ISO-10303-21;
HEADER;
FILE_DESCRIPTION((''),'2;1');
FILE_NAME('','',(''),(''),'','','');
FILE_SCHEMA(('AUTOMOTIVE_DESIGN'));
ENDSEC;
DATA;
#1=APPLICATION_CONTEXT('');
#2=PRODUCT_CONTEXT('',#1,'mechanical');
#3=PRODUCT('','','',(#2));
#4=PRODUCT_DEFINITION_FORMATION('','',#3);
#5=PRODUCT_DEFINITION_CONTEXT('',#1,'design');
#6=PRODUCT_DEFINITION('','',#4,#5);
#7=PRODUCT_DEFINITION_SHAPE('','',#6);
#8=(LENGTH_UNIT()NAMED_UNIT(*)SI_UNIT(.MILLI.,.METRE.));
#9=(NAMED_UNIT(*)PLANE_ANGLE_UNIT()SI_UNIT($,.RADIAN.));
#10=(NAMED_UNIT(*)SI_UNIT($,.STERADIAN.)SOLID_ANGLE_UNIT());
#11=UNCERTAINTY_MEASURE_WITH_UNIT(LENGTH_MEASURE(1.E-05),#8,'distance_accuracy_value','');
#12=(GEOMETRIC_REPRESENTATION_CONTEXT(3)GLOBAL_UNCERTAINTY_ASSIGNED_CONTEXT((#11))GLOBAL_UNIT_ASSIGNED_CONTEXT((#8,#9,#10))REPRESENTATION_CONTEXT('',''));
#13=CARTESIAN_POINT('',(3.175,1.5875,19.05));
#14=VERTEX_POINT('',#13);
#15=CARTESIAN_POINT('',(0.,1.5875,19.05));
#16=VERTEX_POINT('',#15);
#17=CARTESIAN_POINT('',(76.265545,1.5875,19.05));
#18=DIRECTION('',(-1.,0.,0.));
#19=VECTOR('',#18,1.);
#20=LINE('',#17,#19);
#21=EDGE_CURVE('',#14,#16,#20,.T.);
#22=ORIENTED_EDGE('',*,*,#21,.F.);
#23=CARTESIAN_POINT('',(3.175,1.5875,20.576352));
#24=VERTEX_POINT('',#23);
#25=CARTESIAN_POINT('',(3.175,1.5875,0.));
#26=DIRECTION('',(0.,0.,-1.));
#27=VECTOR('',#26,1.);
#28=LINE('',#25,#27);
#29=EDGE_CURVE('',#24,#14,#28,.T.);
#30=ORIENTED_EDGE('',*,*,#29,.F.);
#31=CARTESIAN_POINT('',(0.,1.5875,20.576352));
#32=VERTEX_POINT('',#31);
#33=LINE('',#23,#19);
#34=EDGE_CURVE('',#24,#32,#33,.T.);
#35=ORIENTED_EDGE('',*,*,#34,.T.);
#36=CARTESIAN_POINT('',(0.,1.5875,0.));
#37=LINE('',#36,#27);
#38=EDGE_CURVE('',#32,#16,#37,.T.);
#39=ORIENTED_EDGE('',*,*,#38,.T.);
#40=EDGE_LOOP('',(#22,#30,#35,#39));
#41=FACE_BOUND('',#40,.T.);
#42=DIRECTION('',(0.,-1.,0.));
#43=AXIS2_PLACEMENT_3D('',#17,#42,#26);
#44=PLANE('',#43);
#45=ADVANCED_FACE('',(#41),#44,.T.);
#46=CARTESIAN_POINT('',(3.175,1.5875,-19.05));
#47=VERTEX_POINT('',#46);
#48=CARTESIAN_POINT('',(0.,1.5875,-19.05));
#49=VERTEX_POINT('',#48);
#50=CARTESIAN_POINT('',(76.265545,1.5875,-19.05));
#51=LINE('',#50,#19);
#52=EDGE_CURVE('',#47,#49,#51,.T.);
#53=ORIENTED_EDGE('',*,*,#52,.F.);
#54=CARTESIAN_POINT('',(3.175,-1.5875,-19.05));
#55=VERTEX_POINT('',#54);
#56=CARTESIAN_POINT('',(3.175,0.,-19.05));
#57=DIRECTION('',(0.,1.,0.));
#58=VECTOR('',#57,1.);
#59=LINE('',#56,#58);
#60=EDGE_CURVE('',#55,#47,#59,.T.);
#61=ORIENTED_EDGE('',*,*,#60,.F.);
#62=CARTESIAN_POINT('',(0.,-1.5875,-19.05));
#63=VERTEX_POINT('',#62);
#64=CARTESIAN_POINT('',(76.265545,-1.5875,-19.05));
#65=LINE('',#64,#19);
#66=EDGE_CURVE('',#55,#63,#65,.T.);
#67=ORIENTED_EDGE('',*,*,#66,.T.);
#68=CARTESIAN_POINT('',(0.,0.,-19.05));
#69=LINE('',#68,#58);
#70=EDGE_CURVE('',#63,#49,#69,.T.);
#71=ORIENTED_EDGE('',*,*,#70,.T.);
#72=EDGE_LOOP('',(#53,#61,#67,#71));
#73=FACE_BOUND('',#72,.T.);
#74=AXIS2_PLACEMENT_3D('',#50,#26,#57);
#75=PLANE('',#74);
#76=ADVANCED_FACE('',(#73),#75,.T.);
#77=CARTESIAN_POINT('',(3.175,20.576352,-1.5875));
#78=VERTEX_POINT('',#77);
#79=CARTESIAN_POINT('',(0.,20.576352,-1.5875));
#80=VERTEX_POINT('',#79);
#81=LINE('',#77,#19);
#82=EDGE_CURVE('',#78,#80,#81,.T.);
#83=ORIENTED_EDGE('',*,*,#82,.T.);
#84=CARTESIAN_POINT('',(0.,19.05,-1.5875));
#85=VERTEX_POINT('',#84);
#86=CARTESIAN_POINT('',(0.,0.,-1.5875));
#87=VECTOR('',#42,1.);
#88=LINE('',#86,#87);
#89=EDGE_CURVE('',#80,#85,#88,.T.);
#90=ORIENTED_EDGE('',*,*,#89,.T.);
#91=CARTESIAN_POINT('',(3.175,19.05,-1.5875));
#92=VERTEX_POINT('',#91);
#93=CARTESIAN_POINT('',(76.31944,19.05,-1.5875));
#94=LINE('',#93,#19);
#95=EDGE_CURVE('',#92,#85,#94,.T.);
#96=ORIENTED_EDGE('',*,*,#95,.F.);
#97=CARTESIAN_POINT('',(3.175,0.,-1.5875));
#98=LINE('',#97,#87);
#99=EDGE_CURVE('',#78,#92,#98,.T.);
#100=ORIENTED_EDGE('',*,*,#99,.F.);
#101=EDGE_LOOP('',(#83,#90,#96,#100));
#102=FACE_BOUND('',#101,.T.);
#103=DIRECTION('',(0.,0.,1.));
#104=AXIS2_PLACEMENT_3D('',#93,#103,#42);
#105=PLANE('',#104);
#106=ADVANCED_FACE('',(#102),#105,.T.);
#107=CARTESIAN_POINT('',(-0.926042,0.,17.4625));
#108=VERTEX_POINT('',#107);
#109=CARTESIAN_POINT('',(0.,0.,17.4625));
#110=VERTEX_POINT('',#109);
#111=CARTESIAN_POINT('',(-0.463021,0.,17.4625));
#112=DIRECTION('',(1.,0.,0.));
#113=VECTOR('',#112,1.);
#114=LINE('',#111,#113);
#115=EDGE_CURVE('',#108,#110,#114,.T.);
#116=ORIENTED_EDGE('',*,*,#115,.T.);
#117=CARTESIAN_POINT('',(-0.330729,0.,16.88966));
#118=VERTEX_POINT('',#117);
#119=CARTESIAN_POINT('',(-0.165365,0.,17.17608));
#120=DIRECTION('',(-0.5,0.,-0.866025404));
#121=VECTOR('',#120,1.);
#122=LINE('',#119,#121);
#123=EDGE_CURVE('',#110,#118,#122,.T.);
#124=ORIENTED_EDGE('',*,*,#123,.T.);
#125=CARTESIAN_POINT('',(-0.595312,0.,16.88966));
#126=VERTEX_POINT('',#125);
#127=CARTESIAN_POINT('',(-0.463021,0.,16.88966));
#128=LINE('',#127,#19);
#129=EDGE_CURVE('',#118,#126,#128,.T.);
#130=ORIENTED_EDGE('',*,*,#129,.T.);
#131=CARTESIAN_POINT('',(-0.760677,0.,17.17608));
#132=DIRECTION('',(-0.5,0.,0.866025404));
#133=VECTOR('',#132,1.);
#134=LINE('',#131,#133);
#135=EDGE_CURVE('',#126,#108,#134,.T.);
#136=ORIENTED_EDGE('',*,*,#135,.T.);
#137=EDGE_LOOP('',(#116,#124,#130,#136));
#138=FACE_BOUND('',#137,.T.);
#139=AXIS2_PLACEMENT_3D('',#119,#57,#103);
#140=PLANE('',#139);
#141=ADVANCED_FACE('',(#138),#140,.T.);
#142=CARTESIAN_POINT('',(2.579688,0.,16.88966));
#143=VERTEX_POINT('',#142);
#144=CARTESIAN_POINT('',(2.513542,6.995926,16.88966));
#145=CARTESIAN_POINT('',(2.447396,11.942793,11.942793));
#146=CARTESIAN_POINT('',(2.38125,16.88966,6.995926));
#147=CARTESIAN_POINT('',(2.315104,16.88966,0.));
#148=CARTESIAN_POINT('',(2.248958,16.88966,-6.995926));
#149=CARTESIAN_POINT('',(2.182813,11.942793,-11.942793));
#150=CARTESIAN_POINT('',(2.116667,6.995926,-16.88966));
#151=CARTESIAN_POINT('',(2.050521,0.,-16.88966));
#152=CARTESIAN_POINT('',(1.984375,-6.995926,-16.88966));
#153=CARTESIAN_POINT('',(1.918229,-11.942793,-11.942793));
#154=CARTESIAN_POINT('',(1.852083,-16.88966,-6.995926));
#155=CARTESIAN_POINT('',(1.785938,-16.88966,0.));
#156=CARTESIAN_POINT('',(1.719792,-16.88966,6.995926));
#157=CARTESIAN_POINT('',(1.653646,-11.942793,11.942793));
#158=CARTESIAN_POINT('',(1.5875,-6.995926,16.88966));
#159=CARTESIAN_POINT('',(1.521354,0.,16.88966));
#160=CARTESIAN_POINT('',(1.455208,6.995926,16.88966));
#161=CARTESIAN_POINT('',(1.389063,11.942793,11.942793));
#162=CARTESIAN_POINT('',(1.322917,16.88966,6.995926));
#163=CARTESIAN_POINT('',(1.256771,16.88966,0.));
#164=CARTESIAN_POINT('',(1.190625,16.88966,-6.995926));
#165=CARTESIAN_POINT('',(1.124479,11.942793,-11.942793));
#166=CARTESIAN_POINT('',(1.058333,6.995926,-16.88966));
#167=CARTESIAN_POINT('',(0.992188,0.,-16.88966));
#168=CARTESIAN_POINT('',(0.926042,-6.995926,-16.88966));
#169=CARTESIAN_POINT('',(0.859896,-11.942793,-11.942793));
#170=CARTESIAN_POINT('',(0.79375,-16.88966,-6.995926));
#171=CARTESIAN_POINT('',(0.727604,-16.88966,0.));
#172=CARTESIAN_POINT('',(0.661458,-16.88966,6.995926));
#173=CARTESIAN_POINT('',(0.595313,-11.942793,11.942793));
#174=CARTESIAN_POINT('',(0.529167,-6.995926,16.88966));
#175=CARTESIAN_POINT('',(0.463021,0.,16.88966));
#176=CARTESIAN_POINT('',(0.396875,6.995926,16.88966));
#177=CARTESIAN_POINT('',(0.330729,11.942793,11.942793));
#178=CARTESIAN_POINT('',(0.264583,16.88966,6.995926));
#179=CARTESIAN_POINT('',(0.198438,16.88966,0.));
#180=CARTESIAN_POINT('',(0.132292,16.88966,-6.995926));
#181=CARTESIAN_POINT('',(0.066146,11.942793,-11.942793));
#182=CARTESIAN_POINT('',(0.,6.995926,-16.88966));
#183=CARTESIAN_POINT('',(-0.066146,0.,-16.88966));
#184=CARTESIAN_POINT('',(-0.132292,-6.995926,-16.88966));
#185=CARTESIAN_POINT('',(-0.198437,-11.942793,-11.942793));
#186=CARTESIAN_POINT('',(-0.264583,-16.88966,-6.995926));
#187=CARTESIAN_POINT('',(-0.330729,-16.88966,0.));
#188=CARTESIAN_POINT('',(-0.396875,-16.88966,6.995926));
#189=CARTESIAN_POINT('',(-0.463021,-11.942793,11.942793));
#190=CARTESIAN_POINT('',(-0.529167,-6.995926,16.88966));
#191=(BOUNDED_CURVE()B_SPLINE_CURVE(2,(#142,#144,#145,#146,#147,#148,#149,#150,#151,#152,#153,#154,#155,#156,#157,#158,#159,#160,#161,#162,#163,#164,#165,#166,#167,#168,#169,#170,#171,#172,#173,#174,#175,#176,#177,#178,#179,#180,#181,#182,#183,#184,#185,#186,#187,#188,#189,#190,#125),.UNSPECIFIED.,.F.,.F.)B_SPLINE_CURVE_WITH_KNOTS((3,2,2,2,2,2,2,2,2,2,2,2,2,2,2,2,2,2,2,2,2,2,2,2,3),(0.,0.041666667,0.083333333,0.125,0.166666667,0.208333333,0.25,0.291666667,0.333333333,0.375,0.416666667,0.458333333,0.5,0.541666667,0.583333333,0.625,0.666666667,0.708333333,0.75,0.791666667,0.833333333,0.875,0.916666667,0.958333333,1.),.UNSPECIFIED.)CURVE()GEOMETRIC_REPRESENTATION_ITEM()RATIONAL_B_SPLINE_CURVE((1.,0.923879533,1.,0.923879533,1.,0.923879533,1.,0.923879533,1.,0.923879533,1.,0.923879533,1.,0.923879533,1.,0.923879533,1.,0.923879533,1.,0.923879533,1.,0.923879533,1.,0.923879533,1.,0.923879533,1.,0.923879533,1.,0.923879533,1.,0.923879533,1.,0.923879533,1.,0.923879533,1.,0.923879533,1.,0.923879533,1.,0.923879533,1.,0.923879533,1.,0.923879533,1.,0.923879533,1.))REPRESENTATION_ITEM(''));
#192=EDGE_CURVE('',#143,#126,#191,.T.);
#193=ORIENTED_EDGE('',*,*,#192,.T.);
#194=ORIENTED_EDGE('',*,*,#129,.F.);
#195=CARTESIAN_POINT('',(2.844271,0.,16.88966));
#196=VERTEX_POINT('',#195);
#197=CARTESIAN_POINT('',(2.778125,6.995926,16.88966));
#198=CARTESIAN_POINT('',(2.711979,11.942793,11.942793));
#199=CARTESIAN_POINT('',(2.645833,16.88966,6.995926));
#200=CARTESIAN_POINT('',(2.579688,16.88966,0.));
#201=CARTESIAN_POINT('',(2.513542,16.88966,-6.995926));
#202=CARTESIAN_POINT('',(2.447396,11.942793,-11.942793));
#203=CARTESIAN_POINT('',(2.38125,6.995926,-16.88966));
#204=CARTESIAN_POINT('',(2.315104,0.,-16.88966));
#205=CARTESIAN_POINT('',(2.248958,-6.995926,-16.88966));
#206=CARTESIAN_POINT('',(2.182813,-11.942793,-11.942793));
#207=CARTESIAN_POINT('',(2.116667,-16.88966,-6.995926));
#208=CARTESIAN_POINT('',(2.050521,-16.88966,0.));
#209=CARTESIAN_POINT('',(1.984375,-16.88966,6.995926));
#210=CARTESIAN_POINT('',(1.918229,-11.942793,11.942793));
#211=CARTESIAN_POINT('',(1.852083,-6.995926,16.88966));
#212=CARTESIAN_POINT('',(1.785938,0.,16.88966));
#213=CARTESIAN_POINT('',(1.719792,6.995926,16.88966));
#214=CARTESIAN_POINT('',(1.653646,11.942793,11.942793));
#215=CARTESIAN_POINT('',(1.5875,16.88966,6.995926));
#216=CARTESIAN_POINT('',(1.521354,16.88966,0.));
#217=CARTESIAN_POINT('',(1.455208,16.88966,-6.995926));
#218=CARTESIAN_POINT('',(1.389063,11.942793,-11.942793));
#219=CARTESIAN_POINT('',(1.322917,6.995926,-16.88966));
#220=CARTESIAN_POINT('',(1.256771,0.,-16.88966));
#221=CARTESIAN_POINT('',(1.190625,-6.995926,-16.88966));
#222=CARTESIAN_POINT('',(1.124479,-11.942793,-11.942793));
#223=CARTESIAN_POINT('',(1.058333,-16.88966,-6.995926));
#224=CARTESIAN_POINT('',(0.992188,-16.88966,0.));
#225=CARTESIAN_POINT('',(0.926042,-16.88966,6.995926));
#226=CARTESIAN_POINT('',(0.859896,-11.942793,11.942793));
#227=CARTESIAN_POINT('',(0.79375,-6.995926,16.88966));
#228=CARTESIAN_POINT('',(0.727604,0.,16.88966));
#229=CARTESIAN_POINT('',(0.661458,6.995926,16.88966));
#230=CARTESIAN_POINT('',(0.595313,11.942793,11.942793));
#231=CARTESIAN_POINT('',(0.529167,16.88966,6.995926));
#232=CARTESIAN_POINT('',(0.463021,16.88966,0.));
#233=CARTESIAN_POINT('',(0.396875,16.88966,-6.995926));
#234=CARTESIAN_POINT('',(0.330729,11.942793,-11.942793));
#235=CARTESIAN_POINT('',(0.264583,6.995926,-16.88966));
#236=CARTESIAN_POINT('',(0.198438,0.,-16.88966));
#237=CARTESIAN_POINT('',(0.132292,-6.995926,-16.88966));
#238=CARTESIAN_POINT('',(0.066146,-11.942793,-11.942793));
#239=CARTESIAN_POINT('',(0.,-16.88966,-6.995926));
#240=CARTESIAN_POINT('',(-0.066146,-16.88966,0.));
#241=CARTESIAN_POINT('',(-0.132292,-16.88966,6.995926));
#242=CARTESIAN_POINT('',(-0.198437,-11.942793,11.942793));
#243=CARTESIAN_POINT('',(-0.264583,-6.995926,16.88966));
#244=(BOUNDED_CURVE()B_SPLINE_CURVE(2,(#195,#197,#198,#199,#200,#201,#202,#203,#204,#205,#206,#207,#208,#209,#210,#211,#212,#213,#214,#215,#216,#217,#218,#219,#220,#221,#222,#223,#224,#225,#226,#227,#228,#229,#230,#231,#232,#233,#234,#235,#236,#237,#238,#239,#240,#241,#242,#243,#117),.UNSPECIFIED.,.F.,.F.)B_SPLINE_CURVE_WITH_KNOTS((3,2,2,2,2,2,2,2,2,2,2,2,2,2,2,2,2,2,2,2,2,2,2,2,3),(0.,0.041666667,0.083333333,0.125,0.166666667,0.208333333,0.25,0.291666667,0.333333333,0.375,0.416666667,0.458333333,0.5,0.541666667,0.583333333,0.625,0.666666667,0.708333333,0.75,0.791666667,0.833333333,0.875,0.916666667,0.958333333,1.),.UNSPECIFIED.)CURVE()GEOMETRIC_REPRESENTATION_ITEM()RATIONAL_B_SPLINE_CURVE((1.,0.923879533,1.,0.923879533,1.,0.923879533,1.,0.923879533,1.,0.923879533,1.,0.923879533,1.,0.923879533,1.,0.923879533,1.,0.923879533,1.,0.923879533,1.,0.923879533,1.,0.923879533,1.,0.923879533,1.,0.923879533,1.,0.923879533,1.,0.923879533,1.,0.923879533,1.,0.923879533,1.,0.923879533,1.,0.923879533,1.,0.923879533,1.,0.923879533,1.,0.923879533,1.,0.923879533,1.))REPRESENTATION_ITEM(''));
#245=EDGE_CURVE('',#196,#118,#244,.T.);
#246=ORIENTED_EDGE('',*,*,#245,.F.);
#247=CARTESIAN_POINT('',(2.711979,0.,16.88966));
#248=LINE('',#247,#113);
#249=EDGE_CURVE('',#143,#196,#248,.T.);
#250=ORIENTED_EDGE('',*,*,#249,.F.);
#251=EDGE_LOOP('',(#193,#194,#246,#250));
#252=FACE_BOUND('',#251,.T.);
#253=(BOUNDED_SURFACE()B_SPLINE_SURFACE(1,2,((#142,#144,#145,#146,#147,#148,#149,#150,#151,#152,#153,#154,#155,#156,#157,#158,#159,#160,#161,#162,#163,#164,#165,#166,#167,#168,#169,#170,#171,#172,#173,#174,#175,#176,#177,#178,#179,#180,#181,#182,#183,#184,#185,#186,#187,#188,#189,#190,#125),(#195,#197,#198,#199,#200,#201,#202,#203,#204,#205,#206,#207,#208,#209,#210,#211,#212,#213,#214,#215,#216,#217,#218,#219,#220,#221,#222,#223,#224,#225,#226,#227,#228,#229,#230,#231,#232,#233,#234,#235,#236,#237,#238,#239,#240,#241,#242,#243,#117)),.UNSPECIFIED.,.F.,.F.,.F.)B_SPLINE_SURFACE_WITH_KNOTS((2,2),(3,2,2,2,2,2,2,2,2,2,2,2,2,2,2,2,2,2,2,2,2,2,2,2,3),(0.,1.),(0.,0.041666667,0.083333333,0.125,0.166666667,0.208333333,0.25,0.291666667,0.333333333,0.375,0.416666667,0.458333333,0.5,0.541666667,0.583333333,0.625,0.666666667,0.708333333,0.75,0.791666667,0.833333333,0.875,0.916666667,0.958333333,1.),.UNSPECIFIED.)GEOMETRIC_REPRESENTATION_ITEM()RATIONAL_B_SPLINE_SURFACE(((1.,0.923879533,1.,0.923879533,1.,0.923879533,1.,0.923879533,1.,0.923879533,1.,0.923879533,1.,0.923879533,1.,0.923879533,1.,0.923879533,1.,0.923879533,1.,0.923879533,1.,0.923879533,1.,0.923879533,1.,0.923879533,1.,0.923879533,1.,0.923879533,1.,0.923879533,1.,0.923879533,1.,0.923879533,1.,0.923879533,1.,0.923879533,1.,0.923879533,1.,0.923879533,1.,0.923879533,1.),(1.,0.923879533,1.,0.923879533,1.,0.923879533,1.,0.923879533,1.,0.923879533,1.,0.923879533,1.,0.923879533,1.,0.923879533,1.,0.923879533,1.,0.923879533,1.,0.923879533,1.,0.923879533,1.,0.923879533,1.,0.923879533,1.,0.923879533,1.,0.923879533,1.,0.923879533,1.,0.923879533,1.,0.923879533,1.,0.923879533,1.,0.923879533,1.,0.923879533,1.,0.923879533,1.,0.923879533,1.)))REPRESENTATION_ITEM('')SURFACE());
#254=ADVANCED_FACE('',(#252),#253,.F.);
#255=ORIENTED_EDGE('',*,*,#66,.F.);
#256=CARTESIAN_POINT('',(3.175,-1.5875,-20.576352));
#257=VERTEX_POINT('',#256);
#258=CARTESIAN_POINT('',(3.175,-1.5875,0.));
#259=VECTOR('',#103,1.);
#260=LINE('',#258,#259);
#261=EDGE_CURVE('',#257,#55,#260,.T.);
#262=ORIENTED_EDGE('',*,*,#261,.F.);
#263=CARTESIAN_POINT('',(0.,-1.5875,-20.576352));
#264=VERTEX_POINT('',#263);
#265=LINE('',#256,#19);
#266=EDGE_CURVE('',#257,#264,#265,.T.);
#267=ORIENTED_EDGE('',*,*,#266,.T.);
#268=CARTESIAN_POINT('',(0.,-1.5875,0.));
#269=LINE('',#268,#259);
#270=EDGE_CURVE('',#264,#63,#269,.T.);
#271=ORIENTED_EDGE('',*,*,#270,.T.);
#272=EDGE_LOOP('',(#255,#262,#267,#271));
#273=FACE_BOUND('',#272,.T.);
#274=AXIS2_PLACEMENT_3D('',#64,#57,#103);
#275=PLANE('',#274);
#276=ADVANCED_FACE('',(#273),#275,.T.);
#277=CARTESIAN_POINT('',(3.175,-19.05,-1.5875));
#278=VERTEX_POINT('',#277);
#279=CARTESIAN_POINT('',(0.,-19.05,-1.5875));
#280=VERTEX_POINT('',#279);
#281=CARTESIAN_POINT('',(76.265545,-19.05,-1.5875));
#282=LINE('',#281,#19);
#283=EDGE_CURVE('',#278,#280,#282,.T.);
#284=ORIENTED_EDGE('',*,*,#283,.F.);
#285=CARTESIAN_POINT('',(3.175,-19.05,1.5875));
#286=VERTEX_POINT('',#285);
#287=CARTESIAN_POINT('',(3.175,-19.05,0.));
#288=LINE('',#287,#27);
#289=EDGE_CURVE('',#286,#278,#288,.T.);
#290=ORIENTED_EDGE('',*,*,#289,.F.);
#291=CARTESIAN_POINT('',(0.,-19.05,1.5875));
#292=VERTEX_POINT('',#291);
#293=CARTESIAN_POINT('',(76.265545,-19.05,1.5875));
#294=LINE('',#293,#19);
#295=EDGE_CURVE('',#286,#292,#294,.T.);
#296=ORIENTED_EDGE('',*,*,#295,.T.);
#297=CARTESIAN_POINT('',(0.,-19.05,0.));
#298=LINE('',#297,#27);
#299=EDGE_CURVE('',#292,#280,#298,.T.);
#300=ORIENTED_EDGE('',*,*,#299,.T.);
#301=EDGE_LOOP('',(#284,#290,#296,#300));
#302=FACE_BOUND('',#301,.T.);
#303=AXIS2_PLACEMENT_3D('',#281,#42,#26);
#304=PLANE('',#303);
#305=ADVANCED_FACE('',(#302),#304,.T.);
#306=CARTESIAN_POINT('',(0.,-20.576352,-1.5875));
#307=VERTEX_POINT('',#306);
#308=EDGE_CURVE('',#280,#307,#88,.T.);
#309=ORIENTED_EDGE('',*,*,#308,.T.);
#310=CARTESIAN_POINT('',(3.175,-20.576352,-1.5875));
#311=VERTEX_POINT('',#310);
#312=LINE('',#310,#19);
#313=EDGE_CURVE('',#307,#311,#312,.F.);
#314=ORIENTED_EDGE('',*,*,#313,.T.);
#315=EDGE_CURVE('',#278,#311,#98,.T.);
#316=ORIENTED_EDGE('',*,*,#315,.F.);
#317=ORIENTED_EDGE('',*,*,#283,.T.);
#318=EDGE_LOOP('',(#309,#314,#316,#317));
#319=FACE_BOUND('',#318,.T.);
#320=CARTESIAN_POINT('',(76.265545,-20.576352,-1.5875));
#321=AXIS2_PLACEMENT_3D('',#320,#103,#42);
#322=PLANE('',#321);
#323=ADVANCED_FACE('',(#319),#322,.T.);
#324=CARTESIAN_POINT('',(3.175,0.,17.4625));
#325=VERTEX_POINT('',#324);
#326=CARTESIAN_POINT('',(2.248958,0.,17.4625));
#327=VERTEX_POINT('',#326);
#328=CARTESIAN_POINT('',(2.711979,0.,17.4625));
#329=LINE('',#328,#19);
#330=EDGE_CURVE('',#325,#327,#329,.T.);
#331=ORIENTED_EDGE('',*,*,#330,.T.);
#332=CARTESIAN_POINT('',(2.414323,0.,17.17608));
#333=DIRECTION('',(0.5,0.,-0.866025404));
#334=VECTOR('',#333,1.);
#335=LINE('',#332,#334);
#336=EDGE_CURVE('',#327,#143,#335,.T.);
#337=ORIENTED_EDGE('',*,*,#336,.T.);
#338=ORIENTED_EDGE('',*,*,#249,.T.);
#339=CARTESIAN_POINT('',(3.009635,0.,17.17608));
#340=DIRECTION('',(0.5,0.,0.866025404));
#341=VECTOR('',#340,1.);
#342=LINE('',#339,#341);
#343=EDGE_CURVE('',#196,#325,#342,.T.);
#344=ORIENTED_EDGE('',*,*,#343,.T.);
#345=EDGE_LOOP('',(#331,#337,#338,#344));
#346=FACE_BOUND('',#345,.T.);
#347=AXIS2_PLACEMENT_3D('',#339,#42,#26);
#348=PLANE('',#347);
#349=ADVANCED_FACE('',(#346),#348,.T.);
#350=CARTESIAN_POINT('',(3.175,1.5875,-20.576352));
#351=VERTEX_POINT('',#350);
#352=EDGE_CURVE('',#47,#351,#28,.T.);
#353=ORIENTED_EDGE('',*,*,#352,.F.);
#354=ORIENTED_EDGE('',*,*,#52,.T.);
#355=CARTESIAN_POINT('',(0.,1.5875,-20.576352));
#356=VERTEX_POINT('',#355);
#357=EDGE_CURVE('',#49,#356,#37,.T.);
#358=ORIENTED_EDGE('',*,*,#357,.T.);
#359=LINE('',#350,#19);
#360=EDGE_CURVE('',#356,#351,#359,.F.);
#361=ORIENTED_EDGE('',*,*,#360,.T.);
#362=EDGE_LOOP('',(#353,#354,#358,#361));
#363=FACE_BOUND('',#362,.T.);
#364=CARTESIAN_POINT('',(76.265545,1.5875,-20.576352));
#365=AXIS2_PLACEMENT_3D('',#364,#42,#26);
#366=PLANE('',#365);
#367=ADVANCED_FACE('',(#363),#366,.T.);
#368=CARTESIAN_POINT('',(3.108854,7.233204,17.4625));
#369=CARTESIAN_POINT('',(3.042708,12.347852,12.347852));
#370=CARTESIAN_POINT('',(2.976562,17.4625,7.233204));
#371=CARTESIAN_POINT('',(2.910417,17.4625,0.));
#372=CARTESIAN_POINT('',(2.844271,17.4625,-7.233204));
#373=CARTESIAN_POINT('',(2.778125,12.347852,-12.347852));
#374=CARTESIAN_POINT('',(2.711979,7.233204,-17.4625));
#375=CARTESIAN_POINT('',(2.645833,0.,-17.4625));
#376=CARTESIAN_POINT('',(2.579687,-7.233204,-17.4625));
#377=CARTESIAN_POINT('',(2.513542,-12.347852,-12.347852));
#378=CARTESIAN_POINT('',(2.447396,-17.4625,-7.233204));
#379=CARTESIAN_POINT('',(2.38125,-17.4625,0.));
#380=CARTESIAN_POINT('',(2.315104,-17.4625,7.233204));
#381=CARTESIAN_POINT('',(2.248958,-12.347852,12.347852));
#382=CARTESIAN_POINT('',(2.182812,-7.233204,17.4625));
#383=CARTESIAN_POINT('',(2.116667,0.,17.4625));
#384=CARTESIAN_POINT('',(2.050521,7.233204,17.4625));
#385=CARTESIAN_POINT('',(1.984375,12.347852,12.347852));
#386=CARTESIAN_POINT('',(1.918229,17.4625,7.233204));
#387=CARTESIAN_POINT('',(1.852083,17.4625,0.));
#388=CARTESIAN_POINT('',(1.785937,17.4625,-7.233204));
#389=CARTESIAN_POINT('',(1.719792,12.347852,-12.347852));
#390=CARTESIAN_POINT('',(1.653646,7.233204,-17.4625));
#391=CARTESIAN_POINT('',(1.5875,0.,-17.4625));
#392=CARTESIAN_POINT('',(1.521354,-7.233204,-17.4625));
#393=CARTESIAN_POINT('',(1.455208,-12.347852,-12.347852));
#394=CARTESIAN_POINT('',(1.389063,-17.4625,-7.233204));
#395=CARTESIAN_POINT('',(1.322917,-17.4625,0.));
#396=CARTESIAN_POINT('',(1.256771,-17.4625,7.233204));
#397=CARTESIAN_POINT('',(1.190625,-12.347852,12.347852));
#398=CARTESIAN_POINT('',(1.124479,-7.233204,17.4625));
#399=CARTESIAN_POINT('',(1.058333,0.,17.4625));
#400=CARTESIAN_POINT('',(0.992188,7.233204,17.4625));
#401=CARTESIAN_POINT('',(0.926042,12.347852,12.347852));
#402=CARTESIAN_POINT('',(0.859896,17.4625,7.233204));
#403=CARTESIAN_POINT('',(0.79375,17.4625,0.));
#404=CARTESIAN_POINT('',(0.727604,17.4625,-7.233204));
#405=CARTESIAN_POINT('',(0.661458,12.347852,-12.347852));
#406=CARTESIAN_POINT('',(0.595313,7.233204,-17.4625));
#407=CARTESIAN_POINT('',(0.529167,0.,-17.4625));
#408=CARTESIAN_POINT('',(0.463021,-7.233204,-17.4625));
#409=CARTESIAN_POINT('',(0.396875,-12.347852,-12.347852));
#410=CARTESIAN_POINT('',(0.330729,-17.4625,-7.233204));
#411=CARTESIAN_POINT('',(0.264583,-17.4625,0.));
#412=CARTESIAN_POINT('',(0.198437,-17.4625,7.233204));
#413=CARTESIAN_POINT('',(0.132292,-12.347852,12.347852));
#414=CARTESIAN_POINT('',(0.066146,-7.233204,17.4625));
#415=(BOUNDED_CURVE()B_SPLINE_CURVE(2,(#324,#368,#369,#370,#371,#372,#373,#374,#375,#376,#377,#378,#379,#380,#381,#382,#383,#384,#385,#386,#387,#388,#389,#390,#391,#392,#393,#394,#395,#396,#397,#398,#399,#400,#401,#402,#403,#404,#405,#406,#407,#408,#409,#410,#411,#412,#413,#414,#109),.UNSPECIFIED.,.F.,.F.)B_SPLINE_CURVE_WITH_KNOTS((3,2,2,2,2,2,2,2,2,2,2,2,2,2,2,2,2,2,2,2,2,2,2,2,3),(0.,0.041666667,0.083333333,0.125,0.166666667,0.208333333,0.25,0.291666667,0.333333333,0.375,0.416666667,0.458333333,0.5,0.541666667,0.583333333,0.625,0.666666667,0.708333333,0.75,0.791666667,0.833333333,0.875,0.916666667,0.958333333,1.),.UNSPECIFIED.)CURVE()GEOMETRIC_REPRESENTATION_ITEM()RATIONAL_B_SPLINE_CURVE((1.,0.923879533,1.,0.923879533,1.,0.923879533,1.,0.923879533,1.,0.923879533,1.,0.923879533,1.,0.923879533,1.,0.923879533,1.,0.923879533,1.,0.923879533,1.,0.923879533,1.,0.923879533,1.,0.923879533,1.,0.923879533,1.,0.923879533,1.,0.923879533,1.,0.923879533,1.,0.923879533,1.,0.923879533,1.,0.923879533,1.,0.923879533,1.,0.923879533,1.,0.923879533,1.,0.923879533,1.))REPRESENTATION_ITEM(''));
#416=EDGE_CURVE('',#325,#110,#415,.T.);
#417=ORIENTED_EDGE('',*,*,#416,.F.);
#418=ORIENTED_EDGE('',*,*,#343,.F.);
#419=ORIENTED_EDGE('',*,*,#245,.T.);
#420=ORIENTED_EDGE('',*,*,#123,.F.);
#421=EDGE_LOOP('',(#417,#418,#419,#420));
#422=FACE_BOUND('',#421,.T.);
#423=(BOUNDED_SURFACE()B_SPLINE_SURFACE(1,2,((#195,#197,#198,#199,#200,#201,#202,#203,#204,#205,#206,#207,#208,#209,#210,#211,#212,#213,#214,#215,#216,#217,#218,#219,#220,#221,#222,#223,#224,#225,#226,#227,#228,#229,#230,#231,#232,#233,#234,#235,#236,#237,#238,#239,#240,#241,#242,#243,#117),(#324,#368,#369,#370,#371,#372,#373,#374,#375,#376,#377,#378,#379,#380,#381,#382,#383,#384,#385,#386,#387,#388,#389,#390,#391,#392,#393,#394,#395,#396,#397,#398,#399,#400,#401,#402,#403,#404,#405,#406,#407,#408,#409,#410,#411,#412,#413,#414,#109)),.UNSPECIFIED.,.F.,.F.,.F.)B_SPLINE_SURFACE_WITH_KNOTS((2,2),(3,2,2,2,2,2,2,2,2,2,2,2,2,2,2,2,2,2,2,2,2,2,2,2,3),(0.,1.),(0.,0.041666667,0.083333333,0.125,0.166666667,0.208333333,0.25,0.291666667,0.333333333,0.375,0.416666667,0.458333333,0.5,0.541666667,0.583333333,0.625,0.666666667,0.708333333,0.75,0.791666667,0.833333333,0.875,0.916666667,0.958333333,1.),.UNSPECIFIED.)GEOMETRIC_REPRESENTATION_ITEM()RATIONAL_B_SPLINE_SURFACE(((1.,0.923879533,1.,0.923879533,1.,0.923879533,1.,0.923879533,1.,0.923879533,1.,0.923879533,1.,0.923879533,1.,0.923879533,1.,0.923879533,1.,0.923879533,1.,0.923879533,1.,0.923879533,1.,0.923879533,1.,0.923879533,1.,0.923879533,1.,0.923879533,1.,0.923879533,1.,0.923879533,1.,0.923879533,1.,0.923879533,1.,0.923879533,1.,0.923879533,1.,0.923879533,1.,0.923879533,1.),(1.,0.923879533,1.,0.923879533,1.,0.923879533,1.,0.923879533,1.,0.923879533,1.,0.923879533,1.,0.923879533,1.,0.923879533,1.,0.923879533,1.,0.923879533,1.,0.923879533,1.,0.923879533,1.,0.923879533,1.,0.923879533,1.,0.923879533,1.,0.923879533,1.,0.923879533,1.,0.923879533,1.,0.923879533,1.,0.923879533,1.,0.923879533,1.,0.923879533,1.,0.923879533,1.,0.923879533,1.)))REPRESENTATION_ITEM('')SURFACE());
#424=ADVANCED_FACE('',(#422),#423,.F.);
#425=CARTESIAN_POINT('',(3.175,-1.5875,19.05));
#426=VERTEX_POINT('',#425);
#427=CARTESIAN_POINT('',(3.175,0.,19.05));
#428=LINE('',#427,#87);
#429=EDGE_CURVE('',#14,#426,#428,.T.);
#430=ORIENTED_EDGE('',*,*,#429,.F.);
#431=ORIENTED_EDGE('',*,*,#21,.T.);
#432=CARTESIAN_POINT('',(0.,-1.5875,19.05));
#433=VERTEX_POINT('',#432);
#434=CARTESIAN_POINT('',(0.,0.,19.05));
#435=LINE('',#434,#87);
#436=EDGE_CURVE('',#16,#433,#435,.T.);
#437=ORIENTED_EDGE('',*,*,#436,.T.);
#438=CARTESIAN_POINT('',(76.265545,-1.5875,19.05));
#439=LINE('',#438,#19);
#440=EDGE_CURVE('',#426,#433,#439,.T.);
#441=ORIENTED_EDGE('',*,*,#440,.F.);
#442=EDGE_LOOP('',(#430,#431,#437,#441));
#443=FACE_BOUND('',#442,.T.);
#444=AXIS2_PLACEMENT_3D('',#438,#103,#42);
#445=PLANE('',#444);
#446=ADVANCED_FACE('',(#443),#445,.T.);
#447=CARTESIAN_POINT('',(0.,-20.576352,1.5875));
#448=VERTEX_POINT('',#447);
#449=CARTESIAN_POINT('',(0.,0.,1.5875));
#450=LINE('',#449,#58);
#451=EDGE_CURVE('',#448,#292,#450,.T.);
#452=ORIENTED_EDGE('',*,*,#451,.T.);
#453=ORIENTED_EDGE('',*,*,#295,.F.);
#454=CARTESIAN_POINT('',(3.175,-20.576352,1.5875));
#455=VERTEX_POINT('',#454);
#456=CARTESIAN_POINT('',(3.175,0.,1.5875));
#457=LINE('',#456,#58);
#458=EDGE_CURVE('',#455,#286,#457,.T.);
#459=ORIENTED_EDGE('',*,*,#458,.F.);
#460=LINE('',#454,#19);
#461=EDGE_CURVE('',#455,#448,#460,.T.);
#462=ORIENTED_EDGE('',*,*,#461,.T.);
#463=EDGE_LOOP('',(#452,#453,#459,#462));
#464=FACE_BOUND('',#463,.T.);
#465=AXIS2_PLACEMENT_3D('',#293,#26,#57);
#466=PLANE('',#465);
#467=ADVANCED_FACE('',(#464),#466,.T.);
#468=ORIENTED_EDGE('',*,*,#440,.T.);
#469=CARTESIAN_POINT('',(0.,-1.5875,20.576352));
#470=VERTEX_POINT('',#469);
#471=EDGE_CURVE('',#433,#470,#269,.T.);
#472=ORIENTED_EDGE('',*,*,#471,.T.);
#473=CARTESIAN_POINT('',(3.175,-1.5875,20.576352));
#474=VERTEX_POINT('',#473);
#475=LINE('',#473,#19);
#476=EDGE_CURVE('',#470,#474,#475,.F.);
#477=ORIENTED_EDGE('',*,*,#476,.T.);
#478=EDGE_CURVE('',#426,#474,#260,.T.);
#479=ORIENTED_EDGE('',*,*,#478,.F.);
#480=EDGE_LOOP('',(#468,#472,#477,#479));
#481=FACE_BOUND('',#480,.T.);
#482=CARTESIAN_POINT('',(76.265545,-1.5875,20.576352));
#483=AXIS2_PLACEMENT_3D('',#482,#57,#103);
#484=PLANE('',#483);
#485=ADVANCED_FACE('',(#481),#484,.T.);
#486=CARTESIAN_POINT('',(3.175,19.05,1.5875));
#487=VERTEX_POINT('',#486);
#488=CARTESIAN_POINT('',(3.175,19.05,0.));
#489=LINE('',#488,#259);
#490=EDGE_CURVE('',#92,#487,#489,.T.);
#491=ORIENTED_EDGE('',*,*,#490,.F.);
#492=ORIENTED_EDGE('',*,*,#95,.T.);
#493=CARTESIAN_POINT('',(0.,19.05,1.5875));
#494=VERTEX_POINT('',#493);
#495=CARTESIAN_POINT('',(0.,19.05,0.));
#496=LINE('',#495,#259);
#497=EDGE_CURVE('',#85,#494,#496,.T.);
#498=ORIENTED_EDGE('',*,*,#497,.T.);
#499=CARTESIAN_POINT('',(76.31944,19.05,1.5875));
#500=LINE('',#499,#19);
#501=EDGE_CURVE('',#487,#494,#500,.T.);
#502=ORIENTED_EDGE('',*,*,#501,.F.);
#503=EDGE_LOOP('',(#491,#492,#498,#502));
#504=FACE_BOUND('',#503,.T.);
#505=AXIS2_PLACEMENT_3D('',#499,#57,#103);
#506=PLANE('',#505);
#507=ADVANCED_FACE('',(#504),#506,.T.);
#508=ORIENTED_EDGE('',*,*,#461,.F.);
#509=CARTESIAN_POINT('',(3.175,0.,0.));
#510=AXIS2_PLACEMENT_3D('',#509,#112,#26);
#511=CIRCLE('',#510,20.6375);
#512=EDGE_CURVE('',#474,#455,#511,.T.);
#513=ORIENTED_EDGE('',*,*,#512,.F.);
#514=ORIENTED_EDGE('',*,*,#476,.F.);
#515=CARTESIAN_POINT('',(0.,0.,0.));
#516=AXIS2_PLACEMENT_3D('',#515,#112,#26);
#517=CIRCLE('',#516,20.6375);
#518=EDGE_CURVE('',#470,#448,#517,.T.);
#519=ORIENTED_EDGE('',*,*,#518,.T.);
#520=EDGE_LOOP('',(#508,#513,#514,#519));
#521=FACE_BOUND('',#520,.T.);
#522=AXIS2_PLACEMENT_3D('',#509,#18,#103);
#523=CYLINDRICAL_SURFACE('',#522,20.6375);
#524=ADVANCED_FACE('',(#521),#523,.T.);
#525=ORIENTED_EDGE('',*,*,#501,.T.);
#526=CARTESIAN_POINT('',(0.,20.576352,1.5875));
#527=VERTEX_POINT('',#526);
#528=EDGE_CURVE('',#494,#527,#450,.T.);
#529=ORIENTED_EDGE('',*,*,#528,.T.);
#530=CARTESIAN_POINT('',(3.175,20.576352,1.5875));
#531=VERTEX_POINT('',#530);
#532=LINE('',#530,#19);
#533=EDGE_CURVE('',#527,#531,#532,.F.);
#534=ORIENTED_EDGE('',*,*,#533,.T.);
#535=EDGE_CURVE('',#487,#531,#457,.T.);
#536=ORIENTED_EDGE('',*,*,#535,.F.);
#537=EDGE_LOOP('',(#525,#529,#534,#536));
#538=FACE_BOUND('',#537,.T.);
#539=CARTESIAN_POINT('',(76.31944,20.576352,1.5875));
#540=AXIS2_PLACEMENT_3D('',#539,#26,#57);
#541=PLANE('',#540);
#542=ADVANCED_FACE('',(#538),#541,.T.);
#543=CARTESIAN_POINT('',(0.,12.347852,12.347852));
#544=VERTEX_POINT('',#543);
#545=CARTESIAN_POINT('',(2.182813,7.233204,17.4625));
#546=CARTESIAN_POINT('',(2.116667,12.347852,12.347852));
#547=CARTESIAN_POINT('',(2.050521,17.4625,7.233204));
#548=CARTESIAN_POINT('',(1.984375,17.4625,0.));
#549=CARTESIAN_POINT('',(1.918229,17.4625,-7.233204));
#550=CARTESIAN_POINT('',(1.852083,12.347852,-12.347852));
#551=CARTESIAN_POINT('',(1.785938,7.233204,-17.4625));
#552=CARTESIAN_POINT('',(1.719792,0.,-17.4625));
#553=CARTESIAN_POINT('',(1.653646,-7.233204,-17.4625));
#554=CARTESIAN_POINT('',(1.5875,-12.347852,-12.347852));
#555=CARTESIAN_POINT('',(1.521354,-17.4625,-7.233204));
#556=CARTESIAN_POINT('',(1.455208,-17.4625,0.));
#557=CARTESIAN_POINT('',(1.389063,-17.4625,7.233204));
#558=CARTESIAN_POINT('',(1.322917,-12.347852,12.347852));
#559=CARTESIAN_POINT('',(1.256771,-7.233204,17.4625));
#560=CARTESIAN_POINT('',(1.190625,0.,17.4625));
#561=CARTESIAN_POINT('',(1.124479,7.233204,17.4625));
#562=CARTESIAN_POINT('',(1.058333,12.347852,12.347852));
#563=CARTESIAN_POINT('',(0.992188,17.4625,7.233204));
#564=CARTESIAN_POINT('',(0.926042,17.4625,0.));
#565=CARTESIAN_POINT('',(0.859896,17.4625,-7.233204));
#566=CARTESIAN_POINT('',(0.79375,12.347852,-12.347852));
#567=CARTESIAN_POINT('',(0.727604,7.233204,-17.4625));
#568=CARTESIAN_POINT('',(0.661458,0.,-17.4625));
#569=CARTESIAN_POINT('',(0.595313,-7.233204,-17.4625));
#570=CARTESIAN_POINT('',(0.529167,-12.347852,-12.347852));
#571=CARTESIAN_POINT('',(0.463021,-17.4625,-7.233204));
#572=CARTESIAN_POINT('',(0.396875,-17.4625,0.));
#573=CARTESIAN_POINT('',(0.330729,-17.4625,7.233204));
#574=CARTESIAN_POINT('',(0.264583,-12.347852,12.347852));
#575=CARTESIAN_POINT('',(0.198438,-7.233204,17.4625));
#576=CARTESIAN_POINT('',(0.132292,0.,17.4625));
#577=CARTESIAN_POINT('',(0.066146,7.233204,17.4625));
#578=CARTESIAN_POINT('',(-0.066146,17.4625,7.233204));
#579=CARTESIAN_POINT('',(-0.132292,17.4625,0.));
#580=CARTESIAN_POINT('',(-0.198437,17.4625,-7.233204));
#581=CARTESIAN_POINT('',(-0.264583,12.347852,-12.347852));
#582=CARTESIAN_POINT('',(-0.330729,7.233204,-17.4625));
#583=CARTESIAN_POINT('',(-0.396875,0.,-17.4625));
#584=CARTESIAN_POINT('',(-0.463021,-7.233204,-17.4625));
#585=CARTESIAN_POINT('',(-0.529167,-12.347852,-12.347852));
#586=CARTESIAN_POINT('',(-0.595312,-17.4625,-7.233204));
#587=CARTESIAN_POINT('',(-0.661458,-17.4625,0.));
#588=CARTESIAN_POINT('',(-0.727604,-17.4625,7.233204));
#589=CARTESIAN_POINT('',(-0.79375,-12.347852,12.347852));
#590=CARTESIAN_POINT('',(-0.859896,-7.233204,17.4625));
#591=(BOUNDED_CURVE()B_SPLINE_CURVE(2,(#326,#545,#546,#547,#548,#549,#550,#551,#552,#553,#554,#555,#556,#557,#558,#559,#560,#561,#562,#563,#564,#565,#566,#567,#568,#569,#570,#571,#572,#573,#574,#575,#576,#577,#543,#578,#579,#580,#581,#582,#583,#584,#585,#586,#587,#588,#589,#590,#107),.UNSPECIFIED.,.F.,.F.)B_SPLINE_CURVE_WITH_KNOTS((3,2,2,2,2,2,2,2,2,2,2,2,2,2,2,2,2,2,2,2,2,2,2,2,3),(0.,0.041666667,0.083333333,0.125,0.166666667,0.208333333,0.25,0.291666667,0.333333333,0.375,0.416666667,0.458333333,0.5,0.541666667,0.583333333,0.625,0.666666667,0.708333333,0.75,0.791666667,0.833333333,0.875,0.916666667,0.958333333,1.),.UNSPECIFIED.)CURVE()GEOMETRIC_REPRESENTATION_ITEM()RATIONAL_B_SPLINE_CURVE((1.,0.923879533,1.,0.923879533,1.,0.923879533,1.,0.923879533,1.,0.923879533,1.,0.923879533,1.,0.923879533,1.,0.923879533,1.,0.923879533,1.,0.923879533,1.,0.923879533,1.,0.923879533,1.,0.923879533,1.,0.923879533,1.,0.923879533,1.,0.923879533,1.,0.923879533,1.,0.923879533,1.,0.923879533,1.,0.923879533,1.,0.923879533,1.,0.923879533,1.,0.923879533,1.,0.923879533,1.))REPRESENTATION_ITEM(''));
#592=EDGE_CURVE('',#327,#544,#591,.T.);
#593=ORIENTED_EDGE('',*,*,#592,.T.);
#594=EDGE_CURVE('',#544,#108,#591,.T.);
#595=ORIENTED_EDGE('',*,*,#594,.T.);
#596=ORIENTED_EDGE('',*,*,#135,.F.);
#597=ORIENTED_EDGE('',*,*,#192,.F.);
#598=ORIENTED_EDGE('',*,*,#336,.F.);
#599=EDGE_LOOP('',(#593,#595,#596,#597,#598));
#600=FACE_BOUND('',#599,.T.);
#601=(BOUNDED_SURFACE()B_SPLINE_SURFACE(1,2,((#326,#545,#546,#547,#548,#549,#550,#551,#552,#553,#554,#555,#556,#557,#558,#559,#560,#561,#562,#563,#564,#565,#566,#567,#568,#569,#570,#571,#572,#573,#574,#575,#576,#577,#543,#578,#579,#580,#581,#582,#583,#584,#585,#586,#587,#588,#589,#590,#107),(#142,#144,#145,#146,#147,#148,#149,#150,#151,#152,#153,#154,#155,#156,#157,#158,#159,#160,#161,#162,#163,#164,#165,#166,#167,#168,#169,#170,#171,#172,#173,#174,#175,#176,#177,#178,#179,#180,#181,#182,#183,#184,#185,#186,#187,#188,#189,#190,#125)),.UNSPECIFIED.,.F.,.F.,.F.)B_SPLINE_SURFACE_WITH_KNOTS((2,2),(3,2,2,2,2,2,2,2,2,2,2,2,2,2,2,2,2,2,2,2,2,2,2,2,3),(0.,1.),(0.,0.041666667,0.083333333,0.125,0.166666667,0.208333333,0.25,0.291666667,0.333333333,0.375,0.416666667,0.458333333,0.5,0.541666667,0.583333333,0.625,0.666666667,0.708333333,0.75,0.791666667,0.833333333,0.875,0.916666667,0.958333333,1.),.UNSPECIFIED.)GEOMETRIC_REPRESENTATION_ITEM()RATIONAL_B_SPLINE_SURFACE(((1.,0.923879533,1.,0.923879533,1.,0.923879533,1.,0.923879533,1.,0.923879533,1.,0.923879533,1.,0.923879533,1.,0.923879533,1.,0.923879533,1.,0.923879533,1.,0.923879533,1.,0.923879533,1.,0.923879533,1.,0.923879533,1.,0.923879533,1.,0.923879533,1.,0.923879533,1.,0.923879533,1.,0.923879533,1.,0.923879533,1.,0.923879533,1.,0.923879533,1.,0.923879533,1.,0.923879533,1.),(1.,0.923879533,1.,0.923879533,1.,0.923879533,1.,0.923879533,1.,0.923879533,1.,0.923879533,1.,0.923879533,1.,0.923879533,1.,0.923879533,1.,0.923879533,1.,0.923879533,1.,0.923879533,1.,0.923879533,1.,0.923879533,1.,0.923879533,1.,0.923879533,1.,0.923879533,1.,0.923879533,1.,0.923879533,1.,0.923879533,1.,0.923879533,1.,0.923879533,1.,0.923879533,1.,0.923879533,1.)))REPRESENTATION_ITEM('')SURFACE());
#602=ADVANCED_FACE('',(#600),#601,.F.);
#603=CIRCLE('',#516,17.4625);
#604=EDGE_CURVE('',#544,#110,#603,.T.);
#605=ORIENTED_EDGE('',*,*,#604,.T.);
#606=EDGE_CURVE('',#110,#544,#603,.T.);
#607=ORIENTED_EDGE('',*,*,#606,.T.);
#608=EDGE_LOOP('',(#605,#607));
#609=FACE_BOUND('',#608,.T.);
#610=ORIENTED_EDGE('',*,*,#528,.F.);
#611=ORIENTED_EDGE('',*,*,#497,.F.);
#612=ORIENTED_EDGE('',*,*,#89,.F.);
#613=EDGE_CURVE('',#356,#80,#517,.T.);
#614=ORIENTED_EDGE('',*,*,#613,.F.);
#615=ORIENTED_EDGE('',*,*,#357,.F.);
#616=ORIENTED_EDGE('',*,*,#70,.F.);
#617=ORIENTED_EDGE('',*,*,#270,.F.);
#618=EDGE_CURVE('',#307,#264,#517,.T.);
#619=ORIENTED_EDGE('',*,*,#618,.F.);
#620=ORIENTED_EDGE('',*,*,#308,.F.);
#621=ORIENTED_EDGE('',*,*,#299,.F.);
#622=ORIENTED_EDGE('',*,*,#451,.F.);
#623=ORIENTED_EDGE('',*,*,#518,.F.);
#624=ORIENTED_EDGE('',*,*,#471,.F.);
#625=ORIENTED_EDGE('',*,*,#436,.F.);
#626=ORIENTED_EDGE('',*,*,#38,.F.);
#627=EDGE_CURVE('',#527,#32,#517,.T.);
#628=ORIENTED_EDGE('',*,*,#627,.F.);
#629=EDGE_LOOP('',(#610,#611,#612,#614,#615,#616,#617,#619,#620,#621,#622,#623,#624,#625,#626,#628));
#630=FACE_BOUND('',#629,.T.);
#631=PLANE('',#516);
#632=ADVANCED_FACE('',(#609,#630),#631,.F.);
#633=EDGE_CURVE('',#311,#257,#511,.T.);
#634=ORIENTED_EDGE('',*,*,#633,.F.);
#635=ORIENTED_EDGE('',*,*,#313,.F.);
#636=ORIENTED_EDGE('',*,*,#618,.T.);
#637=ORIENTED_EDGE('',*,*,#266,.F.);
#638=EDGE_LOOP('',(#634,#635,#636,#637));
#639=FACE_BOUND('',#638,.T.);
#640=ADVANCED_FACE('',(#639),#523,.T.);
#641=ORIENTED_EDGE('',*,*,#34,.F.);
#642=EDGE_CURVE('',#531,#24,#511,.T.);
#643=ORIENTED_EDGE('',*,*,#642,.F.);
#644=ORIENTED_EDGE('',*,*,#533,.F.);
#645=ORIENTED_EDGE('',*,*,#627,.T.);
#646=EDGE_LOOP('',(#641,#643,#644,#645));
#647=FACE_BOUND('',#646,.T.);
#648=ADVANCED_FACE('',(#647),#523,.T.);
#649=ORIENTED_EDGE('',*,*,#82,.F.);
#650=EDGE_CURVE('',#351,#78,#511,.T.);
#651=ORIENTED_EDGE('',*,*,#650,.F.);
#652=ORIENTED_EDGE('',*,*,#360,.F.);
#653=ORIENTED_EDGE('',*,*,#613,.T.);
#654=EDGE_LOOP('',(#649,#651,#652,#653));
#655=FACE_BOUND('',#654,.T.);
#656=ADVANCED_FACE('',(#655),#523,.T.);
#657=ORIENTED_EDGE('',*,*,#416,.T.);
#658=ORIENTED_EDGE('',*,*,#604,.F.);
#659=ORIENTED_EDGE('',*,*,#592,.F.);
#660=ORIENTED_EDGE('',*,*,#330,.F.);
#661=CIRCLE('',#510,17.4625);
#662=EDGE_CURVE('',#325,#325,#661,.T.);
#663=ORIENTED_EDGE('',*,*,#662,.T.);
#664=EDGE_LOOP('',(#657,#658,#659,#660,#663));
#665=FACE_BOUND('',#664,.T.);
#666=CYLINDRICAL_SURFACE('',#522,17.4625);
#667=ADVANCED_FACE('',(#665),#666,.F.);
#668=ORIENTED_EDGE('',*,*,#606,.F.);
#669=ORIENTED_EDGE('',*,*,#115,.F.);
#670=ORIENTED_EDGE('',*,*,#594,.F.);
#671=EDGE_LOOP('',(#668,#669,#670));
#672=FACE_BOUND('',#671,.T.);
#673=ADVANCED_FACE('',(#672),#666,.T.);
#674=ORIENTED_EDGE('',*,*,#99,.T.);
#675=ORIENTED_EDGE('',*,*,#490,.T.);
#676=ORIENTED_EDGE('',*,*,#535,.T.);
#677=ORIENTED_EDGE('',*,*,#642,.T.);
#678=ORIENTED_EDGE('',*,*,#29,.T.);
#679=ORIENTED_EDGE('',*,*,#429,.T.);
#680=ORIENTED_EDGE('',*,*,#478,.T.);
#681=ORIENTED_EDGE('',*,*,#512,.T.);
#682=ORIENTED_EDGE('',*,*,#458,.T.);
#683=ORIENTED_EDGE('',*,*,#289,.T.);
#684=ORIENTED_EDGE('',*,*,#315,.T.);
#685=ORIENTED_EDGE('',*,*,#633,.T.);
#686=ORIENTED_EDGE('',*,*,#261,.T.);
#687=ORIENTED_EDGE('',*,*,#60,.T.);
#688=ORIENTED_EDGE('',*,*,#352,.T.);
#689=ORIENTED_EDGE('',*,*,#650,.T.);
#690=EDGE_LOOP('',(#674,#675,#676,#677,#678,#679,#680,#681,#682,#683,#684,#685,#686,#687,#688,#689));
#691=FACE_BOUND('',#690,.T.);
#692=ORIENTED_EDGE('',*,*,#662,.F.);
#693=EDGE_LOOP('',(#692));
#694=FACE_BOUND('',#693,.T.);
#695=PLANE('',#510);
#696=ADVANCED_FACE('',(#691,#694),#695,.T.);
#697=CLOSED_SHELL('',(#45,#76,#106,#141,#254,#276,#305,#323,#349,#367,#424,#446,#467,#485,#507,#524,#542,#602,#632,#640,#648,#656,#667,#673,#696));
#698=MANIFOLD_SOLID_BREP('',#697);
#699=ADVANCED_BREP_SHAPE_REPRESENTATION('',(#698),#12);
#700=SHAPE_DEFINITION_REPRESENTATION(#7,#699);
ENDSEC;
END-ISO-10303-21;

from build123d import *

# Parameters (mm, degrees)
SKETCH1_R           = 20.6375
SKETCH1_R_2         = 17.4625
BOSS_EXTRUDE1_DEPTH = 3.175
THREAD1_PITCH       = 1.058333333
CUT_EXTRUDE1_DEPTH  = 30.47257683
CIRPATTERN1_COUNT   = 4


with BuildPart() as part:
    # Sketch1 → Boss-Extrude1 (new body)
    with BuildSketch(Plane(origin=(0, 0, 0), x_dir=(0, 0, -1), z_dir=(1, 0, 0))):
        Circle(SKETCH1_R)
        Circle(SKETCH1_R_2, mode=Mode.SUBTRACT)
    extrude(amount=BOSS_EXTRUDE1_DEPTH)

    # Thread1: the profile of Thread Profile1 profile screwed along a right-hand helix of 3 turns, 8 arcs to a turn; built about Z, then put on its axis
    thread1_z = Axis((0, 0, 0), (0, 0, 1))
    thread1_corners = [(17.4628, 0, -0.000173205), (17.4628, 0, 0.926214869), (16.889660282, 0, 0.595312499), (16.889660282, 0, 0.330729165)]
    with BuildLine(mode=Mode.PRIVATE) as thread1_profile:
        Line(thread1_corners[0], thread1_corners[1])
        Line(thread1_corners[1], thread1_corners[2])
        Line(thread1_corners[2], thread1_corners[3])
        Line(thread1_corners[3], thread1_corners[0])
    thread1_cap = Face(thread1_profile.wire())
    thread1_turn_angles = [0, 22.5, 45, 67.5, 90, 112.5, 135, 157.5, 180, 202.5, 225, 247.5, 270, 292.5, 315, 337.5, 360]
    thread1_turn_weights = [1, 0.9238795325112867, 1, 0.9238795325112867, 1, 0.9238795325112867, 1, 0.9238795325112867, 1, 0.9238795325112867, 1, 0.9238795325112867, 1, 0.9238795325112867, 1, 0.9238795325112867, 1]
    thread1_turn_rails = [Edge.make_bspline([Vector(p[0], p[1], 0).rotate(thread1_z, thread1_turn_angles[k]) / thread1_turn_weights[k] + Vector(0, 0, p[2] + THREAD1_PITCH * thread1_turn_angles[k] / 360) for k in range(17)], [0, 0, 0, 1, 1, 2, 2, 3, 3, 4, 4, 5, 5, 6, 6, 7, 7, 8, 8, 8], 2, thread1_turn_weights) for p in thread1_corners]
    thread1_turn_sides = [Face.make_surface_from_curves(thread1_turn_rails[p[0]], thread1_turn_rails[p[1]]) for p in [(0, 1), (1, 2), (2, 3), (3, 0)]]
    thread1 = Plane(origin=(3.175, 0, 0), x_dir=(0, 0, 1), z_dir=(-1, 0, 0)) * Solid(Shell([*[p.moved(Location((0, 0, THREAD1_PITCH * i))) for i in range(3) for p in thread1_turn_sides], thread1_cap, thread1_cap.rotate(thread1_z, 1080).moved(Location((0, 0, THREAD1_PITCH * 1080 / 360)))]))
    add(thread1)

    # Sketch4 → Cut-Extrude1 (cut, symmetric)
    with BuildSketch(Plane(origin=(3.175, 0, 0), x_dir=(0, 0, -1), z_dir=(1, 0, 0))):
        Polygon((-1.5875, 124.225317778), (-1.5875, 20.576351717), (-1.5875, 19.05), (1.5875, 19.05), (1.5875, 20.576351717), (1.5875, 124.225317778), (1.5875, 331.523249901), (-1.5875, 331.523249901), align=None)
    cut_extrude1 = extrude(amount=CUT_EXTRUDE1_DEPTH, both=True, mode=Mode.SUBTRACT)

    # CirPattern1: Cut-Extrude1 ×4 about axis
    cirpattern1_axis = Axis((-17.546691261, 0, 0), (1, 0, 0))
    for i in range(1, CIRPATTERN1_COUNT):
        add(cut_extrude1.rotate(cirpattern1_axis, i * 360 / CIRPATTERN1_COUNT), mode=Mode.SUBTRACT)


solid = part.part
